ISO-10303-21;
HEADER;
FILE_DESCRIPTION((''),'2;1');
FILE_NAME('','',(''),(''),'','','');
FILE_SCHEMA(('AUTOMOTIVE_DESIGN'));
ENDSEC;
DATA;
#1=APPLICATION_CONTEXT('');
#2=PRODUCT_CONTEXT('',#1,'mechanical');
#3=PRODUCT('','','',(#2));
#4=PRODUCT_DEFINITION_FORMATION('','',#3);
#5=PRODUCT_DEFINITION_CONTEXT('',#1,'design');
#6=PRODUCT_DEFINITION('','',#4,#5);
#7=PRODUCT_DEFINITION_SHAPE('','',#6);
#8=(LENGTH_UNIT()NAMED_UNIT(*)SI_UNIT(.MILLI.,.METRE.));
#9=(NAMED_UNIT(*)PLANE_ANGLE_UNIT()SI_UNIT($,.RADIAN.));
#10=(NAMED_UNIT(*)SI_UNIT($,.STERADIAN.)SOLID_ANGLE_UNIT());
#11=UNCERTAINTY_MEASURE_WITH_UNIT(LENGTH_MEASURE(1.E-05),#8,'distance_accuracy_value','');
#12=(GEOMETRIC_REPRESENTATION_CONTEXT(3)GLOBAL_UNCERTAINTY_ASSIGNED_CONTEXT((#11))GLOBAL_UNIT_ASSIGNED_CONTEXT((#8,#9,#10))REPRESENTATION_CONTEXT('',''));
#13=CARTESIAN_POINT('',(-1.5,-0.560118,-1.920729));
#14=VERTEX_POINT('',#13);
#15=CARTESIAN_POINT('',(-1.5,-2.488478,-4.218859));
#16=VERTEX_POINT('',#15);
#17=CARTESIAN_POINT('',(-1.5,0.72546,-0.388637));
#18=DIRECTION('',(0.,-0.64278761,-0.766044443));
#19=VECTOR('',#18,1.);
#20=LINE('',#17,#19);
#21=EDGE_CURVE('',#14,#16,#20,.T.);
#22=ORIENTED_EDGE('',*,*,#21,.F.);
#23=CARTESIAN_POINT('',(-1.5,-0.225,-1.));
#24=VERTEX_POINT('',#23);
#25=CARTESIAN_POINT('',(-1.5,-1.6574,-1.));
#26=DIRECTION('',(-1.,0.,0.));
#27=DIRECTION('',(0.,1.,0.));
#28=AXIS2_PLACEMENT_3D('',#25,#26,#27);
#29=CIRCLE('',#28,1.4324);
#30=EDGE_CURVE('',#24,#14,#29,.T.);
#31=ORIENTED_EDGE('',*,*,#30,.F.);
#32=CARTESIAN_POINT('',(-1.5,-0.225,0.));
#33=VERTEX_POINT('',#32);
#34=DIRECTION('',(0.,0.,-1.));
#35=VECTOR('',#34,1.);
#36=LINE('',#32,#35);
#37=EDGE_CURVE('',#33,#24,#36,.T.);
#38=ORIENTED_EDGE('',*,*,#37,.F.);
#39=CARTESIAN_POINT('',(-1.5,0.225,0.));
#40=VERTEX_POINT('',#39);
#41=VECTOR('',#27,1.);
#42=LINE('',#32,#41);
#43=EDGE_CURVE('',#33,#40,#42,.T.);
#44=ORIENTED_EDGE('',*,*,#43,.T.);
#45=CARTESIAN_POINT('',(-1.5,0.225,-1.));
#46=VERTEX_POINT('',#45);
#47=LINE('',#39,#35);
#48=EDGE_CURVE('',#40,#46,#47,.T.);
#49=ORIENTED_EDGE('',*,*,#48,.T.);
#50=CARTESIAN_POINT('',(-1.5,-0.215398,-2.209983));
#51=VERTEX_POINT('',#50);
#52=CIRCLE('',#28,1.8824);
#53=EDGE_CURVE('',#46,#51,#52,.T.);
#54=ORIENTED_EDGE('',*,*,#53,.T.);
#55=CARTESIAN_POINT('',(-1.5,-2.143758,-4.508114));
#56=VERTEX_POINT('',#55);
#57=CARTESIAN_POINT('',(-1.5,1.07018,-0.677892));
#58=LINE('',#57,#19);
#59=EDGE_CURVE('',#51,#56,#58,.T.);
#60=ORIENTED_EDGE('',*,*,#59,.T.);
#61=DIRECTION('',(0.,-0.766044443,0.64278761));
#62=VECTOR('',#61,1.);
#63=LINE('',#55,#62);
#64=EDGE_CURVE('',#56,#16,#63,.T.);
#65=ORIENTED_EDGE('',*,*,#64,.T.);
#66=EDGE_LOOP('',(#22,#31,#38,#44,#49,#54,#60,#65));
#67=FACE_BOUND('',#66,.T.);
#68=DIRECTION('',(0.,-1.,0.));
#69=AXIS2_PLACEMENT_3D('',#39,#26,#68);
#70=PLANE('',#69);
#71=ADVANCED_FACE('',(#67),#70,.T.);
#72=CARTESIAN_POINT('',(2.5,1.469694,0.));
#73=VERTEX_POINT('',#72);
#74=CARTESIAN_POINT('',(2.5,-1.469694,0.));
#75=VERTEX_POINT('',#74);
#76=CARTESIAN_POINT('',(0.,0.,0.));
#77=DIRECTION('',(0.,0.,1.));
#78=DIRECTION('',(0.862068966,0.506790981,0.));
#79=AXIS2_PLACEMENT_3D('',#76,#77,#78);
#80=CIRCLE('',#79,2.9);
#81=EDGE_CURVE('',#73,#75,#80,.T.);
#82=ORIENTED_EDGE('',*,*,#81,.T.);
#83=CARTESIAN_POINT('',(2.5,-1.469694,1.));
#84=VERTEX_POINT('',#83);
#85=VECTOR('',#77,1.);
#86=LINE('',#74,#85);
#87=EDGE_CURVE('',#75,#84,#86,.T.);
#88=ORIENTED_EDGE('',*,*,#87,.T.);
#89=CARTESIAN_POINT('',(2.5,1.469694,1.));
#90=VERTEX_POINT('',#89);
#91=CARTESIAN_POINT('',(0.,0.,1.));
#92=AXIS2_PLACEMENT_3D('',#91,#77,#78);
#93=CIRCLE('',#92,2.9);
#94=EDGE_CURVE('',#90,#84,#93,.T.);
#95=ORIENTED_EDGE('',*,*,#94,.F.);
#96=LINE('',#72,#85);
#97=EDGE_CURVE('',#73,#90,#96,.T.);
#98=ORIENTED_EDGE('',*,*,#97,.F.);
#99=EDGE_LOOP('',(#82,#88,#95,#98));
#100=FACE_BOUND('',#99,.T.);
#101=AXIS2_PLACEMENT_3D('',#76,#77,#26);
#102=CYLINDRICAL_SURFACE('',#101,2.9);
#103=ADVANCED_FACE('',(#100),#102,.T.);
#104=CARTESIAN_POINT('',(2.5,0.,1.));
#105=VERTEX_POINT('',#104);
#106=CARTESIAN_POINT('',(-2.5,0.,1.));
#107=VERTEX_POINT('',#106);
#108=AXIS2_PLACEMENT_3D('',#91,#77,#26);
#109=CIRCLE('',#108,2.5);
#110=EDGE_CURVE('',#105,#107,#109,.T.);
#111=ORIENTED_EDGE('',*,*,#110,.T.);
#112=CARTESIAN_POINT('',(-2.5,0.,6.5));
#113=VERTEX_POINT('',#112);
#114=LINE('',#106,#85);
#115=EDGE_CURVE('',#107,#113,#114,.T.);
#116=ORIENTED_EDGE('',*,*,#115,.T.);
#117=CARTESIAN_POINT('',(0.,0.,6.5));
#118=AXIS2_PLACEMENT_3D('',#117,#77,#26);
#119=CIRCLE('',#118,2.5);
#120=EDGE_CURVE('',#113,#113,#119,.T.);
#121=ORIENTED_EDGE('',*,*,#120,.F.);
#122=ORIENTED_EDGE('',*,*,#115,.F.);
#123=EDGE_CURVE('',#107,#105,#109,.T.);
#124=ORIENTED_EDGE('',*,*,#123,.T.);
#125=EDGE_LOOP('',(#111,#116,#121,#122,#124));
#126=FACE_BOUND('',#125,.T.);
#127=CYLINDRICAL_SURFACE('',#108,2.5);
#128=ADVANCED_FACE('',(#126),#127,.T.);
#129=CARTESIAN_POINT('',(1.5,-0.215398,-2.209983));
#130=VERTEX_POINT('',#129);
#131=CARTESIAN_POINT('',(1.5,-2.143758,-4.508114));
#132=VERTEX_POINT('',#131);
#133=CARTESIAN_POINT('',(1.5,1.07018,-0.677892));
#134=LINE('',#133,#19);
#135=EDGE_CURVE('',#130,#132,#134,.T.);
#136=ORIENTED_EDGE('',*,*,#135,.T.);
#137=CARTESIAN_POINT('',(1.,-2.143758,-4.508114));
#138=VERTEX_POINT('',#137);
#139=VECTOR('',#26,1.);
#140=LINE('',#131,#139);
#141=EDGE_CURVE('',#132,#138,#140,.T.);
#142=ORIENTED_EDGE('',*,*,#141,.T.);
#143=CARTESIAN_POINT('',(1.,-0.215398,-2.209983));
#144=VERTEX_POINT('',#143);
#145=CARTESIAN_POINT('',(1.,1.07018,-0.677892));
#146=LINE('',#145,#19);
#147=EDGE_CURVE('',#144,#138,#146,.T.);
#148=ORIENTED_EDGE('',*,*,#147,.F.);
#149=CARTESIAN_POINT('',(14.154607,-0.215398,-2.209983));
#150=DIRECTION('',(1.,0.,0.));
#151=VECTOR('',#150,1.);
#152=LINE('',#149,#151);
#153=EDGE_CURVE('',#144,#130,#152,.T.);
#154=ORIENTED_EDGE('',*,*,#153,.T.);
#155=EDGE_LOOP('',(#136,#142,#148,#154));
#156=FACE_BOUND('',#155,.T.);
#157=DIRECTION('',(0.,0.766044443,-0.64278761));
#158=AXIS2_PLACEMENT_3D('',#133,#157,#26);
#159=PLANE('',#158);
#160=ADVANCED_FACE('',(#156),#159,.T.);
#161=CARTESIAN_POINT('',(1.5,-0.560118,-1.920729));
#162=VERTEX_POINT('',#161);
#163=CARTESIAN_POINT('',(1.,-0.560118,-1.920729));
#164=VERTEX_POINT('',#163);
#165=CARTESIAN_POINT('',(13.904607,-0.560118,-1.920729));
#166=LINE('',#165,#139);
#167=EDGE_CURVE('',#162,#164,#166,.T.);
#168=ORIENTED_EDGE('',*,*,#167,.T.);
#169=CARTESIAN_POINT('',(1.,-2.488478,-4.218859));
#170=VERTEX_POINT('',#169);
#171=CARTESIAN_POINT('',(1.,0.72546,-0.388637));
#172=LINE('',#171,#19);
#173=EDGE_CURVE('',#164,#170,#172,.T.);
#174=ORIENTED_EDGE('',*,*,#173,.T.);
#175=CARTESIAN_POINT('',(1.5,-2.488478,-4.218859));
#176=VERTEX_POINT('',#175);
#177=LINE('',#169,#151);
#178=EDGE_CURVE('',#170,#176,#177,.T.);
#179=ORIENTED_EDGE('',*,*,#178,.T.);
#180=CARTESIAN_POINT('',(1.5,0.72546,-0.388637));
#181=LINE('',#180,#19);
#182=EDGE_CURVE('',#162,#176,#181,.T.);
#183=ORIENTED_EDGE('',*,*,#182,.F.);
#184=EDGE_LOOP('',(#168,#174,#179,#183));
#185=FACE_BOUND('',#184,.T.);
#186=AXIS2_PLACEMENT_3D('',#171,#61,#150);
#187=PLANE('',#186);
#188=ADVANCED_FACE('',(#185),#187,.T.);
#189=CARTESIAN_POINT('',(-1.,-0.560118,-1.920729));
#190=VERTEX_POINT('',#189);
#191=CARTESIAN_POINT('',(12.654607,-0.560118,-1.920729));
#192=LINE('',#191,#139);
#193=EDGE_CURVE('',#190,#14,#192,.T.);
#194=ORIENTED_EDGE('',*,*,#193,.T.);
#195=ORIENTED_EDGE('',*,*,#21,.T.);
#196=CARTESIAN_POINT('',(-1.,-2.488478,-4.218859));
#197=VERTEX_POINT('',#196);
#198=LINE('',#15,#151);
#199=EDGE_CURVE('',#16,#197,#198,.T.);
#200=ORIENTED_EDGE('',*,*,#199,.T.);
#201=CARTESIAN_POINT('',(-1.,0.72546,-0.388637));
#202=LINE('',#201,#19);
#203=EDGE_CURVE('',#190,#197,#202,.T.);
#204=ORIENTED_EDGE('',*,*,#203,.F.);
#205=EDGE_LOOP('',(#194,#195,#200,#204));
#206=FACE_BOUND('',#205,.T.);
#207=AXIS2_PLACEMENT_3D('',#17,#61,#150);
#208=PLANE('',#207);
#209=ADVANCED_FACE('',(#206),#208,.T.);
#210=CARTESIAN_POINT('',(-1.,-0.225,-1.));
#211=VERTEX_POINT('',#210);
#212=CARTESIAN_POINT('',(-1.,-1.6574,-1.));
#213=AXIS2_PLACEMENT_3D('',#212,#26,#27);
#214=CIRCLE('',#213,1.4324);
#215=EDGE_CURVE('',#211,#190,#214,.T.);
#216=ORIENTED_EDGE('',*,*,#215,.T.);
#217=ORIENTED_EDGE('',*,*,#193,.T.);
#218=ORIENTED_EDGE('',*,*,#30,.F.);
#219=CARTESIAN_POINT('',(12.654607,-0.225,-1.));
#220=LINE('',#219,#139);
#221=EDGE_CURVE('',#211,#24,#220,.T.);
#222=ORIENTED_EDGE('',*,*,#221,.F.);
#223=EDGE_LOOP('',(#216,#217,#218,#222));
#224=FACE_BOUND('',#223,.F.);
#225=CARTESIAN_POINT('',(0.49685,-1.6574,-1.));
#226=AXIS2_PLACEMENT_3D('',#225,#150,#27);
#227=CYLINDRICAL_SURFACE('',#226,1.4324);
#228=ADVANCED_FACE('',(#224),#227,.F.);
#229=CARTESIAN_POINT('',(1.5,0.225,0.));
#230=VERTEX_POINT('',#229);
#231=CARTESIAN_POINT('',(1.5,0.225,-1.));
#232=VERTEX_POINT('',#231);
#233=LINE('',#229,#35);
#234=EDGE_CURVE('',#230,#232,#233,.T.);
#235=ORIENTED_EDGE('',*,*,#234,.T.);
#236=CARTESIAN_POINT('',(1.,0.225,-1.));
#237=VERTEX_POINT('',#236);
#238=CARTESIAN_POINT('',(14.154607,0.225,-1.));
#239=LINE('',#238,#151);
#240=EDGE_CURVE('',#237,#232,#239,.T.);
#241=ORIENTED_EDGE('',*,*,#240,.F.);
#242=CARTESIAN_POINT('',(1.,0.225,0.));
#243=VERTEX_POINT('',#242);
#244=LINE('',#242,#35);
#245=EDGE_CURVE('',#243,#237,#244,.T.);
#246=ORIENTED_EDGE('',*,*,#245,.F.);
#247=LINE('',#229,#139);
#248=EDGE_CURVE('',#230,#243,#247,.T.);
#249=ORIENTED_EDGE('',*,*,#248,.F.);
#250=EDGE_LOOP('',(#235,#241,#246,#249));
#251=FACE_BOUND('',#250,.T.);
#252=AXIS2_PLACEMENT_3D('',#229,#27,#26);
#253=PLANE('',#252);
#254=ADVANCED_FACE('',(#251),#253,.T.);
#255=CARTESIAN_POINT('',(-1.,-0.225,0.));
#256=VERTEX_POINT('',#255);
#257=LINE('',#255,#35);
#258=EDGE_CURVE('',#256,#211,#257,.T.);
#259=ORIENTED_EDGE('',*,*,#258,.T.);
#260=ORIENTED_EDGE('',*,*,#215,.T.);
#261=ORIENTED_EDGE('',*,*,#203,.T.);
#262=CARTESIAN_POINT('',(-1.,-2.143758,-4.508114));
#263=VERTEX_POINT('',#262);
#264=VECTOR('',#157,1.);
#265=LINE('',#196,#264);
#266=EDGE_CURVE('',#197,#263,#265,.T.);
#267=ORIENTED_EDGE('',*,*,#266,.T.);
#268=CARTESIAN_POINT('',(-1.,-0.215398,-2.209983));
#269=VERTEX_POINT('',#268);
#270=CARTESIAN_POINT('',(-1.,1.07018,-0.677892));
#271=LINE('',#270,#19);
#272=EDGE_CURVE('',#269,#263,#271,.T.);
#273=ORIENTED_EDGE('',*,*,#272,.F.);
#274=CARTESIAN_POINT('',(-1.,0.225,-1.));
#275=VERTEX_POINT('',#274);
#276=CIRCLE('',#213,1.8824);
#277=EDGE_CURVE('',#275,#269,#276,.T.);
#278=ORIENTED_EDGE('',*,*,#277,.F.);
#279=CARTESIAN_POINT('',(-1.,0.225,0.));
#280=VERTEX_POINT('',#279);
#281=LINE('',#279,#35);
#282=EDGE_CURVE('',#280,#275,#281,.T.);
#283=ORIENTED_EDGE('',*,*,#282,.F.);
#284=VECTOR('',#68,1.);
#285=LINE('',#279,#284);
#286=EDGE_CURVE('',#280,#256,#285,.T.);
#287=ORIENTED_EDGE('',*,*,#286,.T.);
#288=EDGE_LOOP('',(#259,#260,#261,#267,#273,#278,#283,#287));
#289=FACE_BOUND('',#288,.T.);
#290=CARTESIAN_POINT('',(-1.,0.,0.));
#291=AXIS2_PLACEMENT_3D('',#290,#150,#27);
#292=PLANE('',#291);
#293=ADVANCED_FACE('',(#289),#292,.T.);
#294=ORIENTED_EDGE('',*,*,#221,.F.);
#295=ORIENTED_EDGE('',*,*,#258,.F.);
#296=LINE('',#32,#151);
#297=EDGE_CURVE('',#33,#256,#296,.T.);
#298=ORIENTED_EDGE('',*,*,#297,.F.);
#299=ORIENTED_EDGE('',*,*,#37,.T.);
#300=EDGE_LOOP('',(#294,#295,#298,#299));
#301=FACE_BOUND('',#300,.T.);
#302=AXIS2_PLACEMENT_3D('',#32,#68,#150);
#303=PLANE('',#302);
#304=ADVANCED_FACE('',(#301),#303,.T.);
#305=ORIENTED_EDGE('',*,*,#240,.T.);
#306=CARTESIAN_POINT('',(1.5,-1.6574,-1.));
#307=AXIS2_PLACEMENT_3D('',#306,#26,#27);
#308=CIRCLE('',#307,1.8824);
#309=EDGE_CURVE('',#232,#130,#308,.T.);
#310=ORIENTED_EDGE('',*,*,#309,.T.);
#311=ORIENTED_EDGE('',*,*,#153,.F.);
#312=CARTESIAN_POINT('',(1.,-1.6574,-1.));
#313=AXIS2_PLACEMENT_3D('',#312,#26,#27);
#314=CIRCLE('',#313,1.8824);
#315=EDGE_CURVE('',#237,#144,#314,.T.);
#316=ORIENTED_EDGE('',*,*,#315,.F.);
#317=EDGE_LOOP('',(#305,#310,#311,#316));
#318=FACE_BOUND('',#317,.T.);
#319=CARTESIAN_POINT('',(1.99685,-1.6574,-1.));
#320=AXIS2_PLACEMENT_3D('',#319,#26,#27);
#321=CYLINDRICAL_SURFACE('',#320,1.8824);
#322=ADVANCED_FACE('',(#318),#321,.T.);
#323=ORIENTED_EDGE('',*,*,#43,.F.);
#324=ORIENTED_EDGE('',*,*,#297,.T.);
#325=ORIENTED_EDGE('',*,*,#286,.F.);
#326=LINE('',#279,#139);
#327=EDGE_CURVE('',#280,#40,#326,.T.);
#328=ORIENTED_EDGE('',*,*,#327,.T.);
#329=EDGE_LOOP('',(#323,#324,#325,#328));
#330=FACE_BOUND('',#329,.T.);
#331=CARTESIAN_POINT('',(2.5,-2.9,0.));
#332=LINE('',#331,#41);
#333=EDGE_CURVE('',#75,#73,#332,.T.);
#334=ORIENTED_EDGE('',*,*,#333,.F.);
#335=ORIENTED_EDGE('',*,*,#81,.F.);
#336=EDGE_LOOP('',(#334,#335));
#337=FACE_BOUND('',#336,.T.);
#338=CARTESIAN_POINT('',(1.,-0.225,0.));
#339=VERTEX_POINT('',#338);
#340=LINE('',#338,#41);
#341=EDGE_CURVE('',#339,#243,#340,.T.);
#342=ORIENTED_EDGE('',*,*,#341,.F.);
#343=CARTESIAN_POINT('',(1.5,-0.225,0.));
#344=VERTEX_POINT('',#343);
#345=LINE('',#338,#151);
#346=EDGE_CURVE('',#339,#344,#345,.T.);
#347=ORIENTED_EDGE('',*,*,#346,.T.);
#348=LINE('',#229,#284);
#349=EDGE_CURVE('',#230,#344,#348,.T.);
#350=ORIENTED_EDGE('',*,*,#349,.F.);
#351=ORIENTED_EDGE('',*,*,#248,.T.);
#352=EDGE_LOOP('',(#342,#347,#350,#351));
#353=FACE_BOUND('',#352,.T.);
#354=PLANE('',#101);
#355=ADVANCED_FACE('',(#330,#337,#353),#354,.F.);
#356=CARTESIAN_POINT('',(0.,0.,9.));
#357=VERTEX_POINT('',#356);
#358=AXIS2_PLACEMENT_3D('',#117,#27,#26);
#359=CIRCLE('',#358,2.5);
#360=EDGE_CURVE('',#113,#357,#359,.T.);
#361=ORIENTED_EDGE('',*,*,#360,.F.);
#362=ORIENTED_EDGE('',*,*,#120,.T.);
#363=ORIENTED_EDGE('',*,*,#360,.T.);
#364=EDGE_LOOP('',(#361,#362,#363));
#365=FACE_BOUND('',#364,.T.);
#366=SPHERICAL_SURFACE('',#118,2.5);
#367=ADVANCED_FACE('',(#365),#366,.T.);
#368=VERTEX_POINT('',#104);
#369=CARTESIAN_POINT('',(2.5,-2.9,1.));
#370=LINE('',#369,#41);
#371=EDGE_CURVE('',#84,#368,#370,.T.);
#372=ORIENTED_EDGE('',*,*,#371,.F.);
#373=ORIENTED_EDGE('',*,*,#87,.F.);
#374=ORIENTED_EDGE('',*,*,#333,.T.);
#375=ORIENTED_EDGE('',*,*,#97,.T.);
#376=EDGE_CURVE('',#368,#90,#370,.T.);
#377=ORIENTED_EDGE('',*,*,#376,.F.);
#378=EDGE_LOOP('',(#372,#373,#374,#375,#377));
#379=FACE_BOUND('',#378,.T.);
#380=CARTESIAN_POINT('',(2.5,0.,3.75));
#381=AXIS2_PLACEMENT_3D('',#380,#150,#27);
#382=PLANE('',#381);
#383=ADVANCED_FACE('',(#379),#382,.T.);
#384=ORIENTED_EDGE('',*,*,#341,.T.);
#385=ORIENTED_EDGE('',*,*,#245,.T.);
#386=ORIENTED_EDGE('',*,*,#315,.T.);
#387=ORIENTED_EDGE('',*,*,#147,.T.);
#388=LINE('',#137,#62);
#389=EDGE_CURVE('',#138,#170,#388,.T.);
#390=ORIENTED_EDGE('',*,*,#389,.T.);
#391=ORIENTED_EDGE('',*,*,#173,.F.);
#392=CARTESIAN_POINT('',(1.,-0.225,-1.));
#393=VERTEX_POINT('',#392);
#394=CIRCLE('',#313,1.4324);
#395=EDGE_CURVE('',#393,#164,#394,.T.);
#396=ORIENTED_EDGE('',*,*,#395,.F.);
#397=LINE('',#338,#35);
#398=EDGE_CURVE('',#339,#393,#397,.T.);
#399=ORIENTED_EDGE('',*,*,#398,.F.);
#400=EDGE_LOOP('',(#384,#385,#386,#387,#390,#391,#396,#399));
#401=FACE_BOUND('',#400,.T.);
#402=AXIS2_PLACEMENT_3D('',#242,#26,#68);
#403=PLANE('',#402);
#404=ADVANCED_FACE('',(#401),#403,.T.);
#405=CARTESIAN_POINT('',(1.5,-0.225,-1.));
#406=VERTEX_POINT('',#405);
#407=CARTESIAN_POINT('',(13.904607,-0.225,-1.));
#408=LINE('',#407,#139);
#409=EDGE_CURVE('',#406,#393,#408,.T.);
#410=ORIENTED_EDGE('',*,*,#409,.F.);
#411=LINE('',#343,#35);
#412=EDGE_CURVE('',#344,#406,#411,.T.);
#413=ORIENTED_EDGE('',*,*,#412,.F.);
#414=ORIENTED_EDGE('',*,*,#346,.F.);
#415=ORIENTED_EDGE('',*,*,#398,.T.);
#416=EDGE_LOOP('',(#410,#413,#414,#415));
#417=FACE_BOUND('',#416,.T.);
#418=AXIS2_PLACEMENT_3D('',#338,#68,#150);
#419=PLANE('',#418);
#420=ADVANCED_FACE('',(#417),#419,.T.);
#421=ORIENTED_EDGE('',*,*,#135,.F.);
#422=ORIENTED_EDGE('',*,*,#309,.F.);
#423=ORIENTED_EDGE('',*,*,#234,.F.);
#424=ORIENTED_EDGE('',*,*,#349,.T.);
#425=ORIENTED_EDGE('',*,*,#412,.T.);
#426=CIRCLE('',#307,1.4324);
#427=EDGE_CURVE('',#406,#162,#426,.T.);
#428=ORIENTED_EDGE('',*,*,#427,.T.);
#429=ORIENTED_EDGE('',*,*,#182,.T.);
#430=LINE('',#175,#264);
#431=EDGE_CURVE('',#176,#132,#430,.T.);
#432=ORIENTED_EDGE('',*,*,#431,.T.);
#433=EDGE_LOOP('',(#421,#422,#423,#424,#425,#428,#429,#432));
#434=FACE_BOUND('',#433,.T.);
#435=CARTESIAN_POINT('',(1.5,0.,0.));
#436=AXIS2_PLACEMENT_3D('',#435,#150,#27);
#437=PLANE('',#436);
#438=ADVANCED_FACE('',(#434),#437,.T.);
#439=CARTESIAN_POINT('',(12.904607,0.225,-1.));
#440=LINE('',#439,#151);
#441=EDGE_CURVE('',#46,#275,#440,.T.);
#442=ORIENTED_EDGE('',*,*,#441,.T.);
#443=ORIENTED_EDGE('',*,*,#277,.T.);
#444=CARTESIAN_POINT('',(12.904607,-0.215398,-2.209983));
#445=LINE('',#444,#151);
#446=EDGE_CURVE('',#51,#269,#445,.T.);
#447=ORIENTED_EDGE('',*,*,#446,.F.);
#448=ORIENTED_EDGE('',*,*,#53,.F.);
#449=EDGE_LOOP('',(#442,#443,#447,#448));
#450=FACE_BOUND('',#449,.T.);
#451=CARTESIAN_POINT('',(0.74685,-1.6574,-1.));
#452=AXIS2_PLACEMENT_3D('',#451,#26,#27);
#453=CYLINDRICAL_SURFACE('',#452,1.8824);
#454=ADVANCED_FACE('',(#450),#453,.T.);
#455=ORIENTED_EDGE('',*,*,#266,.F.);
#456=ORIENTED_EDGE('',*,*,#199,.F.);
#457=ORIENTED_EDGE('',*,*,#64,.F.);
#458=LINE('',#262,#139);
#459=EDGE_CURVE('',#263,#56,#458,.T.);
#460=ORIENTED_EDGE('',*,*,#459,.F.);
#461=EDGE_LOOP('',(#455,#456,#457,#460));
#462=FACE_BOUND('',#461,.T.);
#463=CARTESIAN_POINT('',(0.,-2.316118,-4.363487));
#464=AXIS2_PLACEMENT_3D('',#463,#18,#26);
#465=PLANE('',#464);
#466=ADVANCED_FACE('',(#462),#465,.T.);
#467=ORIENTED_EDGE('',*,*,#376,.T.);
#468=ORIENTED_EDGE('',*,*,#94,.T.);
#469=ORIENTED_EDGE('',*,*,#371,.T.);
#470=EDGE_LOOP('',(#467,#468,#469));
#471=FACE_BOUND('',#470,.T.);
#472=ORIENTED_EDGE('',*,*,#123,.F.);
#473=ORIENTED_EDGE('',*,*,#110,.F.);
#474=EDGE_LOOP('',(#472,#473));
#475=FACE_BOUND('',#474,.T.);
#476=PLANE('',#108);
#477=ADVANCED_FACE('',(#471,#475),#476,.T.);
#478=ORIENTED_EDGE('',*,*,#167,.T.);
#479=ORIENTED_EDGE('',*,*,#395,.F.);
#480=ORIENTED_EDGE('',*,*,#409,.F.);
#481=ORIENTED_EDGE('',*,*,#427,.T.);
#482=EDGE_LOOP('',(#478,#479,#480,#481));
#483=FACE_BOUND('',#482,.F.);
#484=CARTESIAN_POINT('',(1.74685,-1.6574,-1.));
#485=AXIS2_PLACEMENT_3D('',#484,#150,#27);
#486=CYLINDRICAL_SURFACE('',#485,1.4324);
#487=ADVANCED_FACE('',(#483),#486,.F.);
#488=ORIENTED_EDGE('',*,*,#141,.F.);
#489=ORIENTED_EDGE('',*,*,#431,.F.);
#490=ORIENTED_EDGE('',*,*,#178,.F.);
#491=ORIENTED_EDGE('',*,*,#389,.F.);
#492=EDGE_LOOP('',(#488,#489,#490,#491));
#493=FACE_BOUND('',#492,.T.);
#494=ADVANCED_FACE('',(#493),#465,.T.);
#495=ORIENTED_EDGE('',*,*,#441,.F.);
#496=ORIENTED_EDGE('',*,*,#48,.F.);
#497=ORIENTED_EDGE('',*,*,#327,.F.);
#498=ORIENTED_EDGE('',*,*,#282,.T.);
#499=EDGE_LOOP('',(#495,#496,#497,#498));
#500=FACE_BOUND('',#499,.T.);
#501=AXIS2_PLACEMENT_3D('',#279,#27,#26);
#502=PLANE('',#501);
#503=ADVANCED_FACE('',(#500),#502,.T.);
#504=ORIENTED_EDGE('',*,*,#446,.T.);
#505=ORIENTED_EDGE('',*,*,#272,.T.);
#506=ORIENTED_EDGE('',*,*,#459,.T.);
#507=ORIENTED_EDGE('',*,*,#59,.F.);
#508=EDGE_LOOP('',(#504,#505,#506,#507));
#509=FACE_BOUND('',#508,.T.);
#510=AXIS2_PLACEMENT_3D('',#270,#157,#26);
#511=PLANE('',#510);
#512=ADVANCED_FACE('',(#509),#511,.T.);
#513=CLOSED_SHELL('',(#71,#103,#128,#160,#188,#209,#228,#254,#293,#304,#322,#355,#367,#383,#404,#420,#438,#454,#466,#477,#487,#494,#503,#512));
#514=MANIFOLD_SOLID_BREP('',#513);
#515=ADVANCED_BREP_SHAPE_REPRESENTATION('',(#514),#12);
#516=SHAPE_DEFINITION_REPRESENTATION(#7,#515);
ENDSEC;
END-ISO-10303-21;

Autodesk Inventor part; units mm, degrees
ref_plane "XZ Plane" through (0, 0, 0) normal (0, 1, 0) x (-1, 0, 0)
ref_plane "XY Plane" through (0, 0, 0) normal (0, 0, 1) x (1, 0, 0)
sketch "Skizze1" plane through (0, 0, 0) normal (0, 1, 0) x (-1, 0, 0)
  line L0 (0, 0) -> (0, 9)
  line L1 (0, 0) -> (2.9, 0)
  line L2 (2.9, 0) -> (2.9, 1)
  line L3 (2.9, 1) -> (2.5, 1)
  line L4 (2.5, 1) -> (2.5, 6.5)
  arc A0 (2.5, 6.5) -> (0, 9) centre (0, 6.5) ccw
  dimension "d0" = 5.8
  dimension "d2" = 5
  dimension "d3" = 9
  dimension "d4" = 1
revolve "Umdrehung1" add sketch "Skizze1" angle 360 about axis through (0, 0, 0) along (0, 0, 1)
ref_plane "Arbeitsebene2" through (2.5, 0, 3.75) normal (1, 0, 0) x (0, 1, 0)
sketch "Skizze2" plane through (2.5, 0, 3.75) normal (1, 0, 0) x (0, 1, 0)
  line L0 (-2.9, -3.75) -> (2.9, -3.75) projected
  line L1 (-2.9, -2.75) -> (2.9, -2.75) projected
  line L2 (-2.9, -2.75) -> (2.9, -2.75)
  line L3 (2.9, -2.75) -> (2.9, -3.75)
  line L4 (2.9, -3.75) -> (-2.9, -3.75)
  line L5 (-2.9, -3.75) -> (-2.9, -2.75)
  point P0 (0, -3.75)
extrude "Extrusion1" cut sketch "Skizze2" along normal blind 1
sketch "Skizze3" plane through (0, 0, 0) normal (0, 0, -1) x (-1, 0, 0)
  line L0 (-1.5, 0.225) -> (-1, 0.225)
  line L1 (-1, 0.225) -> (-1, -0.225)
  line L2 (-1, -0.225) -> (-1.5, -0.225)
  line L3 (-1.5, -0.225) -> (-1.5, 0.225)
  line L4 (1, 0.225) -> (1.5, 0.225)
  line L5 (1.5, 0.225) -> (1.5, -0.225)
  line L6 (1.5, -0.225) -> (1, -0.225)
  line L7 (1, -0.225) -> (1, 0.225)
  line L8 (0, -4.06) -> (0, 4.06) projected
  line L9 (-3.58, 0) -> (3.98, 0) projected
  point P0 (0, 0)
  dimension "d8" = 0.5
  dimension "d10" = 0.45
  dimension "d11" = 3
extrude "Extrusion2" add sketch "Skizze3" along normal blind 5
sketch "Skizze4" plane through (1, -0.225, 0) normal (0, -1, 0) x (1, 0, 0)
  line L0 (1.4937, -1) -> (-4.2917, -1)
  line L1 (-3.9, 0) -> (1.5, 0) projected
  point P0 (-1, 0)
  dimension "d14" = 1
bend part "Biegungsteil1" radius 1.4324 angle 40 line through (2.4937, -0.225, -1) along (-1, 0, 0) centre toward (0, -1, 0) moving side (0, 0, -1) both sides no
properties part number "LED 5mm" material "PC/ABS-Kunststoff"
